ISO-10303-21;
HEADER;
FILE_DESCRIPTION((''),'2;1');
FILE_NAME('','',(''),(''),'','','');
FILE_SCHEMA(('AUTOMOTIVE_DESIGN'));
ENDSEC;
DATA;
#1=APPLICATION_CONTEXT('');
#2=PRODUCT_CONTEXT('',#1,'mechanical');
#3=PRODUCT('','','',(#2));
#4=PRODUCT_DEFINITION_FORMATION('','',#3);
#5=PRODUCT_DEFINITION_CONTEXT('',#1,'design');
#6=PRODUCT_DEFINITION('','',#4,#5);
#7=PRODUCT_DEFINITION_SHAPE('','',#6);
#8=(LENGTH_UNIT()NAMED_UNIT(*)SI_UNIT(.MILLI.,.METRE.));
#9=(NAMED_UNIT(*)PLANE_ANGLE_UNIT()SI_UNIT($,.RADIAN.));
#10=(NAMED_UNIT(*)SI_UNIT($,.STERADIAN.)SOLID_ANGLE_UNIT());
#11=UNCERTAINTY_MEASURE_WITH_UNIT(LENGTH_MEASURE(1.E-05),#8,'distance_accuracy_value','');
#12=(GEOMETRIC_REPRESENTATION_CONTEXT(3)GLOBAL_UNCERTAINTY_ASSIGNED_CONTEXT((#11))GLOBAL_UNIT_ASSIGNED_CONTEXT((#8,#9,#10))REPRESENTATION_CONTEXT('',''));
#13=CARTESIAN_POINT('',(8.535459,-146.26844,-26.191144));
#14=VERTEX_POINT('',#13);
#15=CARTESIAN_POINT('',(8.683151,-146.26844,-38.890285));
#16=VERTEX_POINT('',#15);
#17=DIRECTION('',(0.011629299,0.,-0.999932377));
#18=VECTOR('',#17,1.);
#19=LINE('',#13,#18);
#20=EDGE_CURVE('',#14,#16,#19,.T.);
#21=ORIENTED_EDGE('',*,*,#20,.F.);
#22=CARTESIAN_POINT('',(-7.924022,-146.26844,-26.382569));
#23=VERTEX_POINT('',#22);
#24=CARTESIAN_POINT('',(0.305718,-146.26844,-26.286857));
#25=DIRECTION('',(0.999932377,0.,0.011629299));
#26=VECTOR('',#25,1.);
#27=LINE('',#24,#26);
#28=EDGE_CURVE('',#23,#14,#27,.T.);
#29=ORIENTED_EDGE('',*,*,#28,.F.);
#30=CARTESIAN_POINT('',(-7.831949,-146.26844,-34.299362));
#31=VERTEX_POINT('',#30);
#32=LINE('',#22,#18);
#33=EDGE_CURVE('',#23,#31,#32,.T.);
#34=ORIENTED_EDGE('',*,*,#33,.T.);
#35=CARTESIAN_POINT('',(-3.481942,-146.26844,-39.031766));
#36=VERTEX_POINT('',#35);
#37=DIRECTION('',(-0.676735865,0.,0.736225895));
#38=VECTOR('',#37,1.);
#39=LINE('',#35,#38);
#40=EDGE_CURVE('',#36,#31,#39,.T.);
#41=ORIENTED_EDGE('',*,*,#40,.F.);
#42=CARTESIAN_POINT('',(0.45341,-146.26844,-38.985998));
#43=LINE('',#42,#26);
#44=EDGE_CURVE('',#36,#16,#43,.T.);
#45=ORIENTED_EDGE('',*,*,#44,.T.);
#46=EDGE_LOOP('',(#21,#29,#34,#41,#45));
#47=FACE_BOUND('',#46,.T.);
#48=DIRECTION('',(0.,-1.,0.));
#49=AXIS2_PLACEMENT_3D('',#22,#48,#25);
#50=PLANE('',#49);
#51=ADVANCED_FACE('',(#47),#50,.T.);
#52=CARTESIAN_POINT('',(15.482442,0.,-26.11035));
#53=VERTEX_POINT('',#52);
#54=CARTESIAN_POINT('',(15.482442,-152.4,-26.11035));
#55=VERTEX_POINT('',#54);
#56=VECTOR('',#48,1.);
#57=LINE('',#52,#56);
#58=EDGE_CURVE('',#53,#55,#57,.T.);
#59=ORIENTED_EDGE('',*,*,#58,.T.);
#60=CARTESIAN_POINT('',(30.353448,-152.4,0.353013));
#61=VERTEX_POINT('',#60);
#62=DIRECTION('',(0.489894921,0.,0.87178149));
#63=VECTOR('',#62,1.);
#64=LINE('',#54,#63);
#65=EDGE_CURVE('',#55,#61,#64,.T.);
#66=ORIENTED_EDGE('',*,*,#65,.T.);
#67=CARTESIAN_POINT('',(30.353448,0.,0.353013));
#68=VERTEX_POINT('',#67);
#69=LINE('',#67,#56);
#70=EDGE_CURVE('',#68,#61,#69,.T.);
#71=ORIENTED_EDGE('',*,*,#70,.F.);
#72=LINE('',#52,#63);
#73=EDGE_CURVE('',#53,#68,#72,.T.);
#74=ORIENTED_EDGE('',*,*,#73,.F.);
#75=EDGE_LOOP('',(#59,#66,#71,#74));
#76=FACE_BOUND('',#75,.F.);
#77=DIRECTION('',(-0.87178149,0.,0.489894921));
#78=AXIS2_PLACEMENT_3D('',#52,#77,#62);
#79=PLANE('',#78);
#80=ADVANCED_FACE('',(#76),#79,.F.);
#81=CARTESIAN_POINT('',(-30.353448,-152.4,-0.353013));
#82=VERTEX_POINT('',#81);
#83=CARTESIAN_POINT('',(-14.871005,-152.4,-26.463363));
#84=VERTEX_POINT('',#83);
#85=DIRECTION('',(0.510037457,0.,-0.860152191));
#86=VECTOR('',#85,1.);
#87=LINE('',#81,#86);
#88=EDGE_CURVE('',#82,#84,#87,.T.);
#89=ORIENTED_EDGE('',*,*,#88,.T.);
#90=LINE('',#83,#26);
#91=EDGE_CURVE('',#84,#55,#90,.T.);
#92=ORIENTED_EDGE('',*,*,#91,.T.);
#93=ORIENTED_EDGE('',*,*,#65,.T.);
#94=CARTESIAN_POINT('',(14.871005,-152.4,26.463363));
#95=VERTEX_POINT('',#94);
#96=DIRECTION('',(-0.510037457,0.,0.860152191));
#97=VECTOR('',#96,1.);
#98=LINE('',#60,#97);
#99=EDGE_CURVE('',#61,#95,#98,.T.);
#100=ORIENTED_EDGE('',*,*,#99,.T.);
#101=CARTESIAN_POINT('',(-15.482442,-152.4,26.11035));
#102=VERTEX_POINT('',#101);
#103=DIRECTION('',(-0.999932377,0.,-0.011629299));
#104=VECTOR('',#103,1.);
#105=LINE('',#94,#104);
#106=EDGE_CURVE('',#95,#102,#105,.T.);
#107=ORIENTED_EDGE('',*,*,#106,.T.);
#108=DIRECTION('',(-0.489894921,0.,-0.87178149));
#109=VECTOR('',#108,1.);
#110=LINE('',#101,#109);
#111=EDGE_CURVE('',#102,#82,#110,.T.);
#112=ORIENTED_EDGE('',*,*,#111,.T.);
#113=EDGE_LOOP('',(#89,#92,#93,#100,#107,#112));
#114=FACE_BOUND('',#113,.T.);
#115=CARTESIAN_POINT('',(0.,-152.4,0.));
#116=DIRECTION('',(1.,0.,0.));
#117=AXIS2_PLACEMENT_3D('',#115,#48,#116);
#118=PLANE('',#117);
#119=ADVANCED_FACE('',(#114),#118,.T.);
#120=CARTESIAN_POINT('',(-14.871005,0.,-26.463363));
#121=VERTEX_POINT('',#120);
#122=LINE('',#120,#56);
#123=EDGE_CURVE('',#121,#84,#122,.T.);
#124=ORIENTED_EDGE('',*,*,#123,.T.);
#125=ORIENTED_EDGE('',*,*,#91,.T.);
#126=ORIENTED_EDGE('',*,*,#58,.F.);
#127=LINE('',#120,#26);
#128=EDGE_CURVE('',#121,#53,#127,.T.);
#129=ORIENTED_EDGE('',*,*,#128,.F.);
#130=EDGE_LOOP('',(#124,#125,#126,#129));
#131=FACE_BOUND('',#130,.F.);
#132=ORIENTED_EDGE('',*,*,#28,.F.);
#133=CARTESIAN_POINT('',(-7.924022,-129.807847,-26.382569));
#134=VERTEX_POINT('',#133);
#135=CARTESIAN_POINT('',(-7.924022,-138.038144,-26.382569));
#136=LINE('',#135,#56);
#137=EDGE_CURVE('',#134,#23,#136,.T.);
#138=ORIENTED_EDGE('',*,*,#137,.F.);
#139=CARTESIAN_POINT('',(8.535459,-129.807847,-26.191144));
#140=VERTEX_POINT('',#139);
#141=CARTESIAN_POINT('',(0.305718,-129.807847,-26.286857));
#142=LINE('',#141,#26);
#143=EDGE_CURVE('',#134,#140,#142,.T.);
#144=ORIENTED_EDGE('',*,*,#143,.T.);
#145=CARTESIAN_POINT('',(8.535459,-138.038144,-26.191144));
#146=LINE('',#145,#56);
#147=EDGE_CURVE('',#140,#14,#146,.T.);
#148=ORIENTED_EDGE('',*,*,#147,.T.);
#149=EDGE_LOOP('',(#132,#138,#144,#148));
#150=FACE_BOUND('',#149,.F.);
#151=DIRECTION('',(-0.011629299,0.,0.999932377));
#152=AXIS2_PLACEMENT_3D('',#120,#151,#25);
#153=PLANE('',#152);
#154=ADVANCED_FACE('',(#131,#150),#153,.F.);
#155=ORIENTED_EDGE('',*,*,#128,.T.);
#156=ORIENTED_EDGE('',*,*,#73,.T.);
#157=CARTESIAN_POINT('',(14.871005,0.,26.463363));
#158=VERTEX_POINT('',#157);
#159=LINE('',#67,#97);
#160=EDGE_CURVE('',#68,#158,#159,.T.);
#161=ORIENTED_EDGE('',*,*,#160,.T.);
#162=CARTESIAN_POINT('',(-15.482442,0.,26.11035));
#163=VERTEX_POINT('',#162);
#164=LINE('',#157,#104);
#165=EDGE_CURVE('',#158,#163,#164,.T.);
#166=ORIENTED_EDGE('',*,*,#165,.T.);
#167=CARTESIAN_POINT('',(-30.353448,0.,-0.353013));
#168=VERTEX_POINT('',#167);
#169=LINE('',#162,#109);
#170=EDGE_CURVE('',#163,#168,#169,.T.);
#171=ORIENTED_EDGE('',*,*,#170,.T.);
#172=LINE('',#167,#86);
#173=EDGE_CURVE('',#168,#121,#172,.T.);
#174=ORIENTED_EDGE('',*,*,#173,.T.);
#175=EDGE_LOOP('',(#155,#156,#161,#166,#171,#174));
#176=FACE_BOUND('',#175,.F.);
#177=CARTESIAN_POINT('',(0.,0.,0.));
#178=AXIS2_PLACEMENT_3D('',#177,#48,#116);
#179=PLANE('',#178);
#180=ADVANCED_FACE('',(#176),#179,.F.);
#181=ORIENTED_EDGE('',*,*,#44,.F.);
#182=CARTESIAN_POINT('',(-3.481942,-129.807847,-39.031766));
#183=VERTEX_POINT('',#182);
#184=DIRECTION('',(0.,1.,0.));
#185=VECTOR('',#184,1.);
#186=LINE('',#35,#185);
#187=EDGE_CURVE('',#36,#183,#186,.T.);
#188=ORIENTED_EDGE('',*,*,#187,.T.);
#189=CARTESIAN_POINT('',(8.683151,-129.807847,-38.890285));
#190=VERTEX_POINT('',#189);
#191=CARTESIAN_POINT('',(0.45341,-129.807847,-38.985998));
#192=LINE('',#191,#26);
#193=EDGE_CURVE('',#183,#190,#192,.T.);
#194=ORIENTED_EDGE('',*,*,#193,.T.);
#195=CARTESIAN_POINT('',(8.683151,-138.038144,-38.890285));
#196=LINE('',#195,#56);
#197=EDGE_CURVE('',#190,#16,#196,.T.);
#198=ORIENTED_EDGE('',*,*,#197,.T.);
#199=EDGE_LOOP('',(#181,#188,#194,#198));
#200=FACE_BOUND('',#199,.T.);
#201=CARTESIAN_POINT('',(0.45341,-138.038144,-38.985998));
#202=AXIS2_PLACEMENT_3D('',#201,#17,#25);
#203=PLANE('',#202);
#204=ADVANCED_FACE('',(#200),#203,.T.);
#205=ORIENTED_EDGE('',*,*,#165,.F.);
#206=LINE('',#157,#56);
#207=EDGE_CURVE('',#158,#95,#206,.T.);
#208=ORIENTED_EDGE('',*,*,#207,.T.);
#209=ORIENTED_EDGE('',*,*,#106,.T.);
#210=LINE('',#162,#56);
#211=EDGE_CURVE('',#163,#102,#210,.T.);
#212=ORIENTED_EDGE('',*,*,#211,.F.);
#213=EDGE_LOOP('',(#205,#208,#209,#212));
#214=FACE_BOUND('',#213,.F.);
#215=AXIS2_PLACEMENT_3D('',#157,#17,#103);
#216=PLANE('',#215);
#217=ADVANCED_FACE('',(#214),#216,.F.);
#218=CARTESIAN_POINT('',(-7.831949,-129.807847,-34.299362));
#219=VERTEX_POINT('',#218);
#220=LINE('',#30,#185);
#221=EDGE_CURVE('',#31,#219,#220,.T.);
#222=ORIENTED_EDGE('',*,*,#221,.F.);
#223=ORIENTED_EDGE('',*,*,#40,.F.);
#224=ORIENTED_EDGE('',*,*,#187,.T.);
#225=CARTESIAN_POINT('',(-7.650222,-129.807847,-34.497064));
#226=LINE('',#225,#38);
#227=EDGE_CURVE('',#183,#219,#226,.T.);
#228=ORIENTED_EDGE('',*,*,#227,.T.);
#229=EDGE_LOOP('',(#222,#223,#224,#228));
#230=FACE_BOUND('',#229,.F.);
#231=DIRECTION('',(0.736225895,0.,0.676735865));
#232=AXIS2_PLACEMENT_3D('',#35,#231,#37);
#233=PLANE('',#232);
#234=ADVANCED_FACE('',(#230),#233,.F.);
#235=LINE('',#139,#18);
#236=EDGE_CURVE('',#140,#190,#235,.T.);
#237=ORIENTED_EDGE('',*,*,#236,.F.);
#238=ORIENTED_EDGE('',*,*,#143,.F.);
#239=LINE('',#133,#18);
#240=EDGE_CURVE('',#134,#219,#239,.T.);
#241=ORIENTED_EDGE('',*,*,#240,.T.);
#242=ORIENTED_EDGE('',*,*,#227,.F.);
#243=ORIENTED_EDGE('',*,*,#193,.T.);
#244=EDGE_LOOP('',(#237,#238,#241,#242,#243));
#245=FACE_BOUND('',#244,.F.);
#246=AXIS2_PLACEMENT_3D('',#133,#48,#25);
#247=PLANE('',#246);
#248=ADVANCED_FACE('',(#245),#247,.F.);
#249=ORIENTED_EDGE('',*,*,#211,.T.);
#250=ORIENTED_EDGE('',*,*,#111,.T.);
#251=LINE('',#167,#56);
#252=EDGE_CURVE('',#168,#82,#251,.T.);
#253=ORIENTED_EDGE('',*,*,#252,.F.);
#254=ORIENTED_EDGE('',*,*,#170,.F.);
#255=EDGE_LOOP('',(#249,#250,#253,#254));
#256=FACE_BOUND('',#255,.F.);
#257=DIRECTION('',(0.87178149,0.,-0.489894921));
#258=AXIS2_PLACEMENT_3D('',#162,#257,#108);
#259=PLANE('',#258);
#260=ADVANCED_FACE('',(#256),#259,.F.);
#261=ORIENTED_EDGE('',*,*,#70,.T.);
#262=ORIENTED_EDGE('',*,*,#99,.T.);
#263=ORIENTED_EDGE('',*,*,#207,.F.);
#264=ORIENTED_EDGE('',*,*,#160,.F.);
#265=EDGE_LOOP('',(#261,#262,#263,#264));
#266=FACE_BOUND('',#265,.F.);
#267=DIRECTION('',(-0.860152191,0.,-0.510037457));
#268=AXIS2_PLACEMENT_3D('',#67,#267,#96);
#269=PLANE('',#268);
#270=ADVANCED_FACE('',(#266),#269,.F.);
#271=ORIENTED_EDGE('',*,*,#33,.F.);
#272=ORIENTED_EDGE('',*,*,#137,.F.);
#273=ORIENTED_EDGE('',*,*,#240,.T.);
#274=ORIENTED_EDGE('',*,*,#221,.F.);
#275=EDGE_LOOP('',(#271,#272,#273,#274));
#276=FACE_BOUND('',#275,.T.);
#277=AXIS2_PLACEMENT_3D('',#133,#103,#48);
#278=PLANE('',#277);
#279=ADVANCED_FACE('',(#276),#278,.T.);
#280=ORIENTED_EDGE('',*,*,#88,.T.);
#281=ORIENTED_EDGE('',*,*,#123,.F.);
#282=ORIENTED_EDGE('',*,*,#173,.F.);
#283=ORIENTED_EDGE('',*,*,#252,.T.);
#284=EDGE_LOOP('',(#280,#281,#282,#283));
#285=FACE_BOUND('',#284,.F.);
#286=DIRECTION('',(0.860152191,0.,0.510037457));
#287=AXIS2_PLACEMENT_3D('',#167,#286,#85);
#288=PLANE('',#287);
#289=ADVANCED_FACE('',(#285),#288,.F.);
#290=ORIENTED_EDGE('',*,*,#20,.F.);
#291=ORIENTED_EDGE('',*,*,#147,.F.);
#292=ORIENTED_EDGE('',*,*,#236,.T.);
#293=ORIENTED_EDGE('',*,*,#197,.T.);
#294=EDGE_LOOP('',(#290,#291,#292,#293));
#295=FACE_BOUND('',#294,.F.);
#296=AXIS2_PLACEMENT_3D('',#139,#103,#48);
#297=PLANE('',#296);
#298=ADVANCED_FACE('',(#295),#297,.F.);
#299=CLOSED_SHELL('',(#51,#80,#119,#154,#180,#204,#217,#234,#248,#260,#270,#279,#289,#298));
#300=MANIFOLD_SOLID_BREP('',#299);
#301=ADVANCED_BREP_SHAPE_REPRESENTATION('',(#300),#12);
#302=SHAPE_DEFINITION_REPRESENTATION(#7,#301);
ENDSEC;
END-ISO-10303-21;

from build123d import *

# Parameters (mm, degrees)
F1_DEPTH = 152.4
F2_W     = 16.4605937898
F2_H     = 16.4605937898
F3_DEPTH = 12.7
F5_DEPTH = 25.4


with BuildPart() as f1:
    # F0 (on Front) → F1 (new body)
    with BuildSketch(Plane.XZ):
        Polygon((15.4824422158, -26.1103501737), (30.3534476601, 0.3530131847), (14.8710054442, 26.4633633584), (-15.4824422158, 26.1103501737), (-30.3534476601, -0.3530131847), (-14.8710054442, -26.4633633584), align=None)
    extrude(amount=F1_DEPTH)

    # F2 (on face) → F3 (join)
    with BuildSketch(Plane(origin=(0.3057183858, 0, -26.2868567661), x_dir=(0.9999323774, 0, 0.0116292988), z_dir=(0.0116292988, 0, -0.9999323774))):
        with Locations((0, 138.0381435156)):
            Rectangle(F2_W, F2_H)
    extrude(amount=F3_DEPTH)

    # F4 (on face) → F5 (cut)
    with BuildSketch(Plane.XZ.offset(146.2684404105)):
        Polygon((-3.4819418117, -39.031766442), (-7.8319489835, -34.2993618355), (-7.7763298602, -39.0817105412), align=None)
    extrude(amount=-F5_DEPTH, mode=Mode.SUBTRACT)


solid = f1.part
